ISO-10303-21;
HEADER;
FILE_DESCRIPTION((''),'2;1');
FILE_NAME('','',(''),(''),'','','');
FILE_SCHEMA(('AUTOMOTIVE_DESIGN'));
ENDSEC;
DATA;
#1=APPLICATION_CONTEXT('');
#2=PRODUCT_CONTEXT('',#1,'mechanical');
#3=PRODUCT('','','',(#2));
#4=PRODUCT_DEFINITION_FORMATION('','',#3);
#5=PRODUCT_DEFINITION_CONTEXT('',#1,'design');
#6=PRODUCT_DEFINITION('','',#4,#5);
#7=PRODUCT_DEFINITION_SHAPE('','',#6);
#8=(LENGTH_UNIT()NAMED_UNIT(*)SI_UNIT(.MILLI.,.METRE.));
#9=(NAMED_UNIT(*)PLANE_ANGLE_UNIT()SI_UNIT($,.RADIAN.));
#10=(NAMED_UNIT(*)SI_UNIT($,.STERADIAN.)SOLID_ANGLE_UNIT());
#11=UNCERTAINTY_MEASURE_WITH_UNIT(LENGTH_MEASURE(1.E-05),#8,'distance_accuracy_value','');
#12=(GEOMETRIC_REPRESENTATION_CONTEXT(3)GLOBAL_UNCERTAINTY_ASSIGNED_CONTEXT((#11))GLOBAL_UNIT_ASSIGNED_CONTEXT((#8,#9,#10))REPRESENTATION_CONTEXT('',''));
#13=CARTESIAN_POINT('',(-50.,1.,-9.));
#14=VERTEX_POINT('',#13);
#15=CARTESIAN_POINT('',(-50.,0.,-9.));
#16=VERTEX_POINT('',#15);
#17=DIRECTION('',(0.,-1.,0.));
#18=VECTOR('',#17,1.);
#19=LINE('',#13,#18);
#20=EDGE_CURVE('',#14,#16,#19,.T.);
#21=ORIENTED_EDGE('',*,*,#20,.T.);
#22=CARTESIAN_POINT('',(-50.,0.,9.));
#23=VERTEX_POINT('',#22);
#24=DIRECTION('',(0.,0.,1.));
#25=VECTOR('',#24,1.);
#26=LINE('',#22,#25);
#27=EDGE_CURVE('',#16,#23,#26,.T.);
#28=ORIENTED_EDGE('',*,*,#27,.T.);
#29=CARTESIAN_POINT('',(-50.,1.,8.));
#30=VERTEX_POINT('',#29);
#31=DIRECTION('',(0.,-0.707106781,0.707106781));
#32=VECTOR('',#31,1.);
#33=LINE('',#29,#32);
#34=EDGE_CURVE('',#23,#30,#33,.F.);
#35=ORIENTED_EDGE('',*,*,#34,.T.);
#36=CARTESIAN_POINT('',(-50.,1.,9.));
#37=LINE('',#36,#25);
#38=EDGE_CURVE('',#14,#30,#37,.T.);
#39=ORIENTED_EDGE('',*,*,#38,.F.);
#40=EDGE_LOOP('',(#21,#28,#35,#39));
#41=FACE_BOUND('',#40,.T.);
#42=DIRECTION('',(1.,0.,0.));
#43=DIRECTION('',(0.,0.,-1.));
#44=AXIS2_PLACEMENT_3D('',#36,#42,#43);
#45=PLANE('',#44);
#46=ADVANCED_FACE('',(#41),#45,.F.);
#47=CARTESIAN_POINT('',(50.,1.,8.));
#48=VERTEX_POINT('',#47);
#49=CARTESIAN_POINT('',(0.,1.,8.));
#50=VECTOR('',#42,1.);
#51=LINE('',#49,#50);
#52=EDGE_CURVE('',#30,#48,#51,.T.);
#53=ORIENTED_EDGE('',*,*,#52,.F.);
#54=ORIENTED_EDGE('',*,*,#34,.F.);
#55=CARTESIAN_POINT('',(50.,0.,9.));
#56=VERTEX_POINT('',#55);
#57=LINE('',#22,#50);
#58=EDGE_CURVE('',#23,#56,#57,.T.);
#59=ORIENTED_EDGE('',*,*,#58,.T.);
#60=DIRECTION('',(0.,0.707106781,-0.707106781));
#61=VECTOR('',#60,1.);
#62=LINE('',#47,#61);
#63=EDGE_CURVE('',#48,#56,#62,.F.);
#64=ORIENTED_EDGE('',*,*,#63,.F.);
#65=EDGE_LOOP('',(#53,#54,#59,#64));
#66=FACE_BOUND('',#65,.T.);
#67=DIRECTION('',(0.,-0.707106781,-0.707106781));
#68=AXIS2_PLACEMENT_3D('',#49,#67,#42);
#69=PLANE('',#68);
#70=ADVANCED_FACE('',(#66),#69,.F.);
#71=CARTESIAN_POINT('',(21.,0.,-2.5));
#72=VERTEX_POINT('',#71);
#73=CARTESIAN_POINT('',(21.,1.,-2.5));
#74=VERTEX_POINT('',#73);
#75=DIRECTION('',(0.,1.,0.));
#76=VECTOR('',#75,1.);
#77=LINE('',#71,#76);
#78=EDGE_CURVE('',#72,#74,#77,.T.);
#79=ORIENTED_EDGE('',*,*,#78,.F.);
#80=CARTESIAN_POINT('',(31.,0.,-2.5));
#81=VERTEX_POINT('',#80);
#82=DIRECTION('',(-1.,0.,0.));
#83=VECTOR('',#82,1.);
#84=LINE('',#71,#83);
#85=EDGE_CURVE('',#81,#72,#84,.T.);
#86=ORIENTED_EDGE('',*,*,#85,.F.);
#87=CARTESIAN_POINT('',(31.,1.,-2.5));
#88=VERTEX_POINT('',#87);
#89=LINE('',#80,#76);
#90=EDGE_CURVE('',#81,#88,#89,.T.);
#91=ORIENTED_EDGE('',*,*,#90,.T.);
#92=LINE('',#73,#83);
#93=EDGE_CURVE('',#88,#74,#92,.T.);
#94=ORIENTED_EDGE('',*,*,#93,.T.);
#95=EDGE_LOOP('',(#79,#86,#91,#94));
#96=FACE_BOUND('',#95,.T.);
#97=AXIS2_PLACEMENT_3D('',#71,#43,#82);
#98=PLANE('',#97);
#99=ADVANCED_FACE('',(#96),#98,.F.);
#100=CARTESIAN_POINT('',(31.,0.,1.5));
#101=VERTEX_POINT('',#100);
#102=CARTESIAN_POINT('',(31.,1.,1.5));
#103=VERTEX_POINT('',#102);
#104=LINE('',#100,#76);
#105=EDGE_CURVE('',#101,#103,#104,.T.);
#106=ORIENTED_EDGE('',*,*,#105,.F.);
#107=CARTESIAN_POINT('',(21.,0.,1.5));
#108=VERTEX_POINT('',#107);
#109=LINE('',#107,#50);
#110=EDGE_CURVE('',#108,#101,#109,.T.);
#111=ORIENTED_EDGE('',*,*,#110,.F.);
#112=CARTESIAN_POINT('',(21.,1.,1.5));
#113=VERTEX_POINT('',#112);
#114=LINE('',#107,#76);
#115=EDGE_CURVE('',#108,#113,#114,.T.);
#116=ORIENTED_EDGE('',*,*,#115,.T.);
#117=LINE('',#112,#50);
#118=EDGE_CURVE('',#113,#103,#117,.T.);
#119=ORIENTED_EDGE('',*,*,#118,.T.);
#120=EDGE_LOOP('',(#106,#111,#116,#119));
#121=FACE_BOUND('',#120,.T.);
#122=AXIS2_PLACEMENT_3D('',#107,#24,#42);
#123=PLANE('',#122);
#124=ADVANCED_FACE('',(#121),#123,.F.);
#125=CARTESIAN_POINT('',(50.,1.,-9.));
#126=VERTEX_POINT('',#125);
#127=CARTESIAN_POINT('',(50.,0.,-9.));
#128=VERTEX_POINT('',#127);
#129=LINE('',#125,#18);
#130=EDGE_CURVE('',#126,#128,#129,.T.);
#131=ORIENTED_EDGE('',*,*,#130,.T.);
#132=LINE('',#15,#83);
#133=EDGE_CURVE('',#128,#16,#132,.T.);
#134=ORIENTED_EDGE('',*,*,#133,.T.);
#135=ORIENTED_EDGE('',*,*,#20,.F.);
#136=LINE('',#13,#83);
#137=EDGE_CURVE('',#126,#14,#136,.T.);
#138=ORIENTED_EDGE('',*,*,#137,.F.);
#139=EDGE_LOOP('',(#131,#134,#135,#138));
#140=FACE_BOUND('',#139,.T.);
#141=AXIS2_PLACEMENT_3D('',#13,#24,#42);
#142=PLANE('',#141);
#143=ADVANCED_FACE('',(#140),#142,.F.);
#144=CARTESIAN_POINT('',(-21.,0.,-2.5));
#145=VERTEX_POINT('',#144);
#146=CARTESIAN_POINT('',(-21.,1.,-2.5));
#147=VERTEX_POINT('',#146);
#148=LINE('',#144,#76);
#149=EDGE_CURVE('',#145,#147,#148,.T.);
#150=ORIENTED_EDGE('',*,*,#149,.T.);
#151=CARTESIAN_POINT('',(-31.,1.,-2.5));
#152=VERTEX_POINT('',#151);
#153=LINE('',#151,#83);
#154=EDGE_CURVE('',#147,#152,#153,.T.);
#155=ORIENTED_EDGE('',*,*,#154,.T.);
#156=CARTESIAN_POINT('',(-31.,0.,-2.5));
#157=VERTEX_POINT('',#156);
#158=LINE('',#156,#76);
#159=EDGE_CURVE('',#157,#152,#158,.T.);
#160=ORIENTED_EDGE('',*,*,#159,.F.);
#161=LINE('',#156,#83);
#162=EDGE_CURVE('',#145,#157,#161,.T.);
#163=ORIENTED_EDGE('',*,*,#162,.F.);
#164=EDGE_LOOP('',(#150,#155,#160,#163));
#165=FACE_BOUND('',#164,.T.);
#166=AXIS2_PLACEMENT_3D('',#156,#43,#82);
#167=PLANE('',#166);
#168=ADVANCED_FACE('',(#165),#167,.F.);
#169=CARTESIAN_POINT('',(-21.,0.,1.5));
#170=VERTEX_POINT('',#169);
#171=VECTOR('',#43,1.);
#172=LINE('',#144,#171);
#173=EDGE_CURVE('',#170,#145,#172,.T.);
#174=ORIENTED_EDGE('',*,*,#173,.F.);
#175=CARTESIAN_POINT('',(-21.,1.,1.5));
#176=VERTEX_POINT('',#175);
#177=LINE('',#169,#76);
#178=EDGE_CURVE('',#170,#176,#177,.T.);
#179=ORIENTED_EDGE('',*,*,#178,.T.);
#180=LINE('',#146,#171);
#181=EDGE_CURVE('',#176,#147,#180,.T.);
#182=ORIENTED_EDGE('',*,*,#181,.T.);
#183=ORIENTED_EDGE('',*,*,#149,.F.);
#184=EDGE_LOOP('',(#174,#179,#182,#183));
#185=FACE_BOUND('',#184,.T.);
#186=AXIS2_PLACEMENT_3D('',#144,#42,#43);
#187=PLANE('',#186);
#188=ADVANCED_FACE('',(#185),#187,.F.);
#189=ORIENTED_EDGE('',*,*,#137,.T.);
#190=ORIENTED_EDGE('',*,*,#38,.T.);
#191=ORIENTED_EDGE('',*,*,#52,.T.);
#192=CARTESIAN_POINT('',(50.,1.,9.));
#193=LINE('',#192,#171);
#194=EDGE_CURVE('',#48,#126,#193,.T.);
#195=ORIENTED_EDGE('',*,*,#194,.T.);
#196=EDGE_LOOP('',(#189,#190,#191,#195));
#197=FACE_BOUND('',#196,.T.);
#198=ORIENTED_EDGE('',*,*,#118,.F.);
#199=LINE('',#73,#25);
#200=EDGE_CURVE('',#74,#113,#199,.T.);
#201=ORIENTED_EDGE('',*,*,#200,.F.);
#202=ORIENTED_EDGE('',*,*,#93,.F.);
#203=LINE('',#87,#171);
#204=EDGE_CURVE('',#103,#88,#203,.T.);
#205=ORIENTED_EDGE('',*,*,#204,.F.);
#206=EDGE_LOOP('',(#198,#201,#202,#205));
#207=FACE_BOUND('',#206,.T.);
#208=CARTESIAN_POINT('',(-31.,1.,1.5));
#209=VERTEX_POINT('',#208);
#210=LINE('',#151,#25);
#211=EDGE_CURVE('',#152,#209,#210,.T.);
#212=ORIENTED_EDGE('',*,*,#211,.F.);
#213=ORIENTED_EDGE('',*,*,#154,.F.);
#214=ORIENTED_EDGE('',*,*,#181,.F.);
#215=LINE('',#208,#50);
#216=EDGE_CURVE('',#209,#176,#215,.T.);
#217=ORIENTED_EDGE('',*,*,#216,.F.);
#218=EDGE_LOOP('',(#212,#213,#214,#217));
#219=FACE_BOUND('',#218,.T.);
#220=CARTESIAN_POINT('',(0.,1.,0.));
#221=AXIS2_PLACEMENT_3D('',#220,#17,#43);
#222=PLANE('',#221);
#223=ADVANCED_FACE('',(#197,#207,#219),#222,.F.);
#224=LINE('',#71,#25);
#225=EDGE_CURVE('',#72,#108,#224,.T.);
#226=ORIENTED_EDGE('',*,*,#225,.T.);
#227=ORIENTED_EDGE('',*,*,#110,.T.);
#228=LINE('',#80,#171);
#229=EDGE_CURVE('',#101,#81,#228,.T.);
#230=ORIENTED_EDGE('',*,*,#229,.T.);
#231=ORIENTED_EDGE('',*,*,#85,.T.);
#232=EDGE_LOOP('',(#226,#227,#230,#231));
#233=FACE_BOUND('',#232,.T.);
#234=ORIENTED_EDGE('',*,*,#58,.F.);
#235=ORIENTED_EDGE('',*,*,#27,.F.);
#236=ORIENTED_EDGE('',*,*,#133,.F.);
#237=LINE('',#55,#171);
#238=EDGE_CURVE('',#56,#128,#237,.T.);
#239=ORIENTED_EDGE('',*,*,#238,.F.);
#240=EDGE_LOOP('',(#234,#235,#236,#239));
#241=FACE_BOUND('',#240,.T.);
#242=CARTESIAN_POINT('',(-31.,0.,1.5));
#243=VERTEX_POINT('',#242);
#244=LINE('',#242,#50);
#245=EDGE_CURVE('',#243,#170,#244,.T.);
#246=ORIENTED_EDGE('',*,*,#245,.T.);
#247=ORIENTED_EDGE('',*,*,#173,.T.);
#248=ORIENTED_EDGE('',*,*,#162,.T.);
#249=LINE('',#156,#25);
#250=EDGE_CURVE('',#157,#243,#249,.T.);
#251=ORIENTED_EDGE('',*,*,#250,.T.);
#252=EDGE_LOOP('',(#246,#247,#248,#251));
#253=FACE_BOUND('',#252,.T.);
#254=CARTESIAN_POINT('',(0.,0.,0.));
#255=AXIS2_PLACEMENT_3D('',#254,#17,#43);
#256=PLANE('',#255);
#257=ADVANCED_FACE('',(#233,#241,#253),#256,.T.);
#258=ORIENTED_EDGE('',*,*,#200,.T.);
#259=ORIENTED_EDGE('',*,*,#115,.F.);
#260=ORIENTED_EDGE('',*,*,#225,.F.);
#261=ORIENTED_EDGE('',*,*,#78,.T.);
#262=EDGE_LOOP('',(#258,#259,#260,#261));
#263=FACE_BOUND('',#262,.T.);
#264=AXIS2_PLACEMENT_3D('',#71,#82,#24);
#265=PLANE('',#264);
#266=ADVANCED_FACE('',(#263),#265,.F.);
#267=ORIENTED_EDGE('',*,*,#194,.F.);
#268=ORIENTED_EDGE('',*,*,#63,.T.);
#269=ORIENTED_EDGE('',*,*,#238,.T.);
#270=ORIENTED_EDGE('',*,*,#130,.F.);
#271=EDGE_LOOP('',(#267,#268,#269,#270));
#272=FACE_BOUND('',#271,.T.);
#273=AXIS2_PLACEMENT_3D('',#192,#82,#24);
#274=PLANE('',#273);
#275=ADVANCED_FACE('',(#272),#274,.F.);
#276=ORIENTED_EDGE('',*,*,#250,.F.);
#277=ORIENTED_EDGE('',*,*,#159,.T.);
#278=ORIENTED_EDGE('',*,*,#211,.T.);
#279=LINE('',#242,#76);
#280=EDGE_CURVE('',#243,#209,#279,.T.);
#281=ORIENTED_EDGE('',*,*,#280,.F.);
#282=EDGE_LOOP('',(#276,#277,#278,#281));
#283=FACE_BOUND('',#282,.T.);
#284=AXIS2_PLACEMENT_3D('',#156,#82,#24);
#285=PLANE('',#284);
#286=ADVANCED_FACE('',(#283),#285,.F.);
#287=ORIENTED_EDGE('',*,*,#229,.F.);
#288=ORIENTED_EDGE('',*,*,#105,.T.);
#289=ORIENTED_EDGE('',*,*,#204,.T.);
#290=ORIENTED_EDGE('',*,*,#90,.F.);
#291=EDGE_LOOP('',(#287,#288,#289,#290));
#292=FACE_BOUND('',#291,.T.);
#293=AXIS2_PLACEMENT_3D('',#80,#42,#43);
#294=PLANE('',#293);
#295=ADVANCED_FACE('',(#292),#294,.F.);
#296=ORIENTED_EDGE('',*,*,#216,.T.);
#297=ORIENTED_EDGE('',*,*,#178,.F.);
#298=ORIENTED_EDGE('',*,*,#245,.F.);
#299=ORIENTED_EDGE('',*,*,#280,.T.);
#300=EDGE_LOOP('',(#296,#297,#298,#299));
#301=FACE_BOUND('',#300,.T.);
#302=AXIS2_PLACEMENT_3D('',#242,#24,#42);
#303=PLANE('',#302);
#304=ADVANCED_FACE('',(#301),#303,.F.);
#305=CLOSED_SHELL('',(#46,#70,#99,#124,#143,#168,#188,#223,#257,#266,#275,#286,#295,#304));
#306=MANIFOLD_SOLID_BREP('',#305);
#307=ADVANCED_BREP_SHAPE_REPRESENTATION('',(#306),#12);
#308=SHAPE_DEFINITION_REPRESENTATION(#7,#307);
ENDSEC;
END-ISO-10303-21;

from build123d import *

# Parameters (mm, degrees)
SKETCH_1_W          = 100
SKETCH_1_H          = 18
EXTRUDE_1_DEPTH     = 1
CHAMFER_1_SIZE      = 1
SKETCH_2_W          = 10
SKETCH_2_H          = 4
CUT_EXTRUDE_1_DEPTH = 1


with BuildPart() as part:
    # Эскиз1 → Бобышка-Вытянуть1 (new body)
    with BuildSketch(Plane(origin=(0, 0, 0), x_dir=(1, 0, 0), z_dir=(0, 1, 0))):
        Rectangle(SKETCH_1_W, SKETCH_1_H)
    extrude(amount=EXTRUDE_1_DEPTH)

    # Фаска1
    chamfer_1_edges = [part.edges().sort_by_distance(p)[0] for p in [
        (0, 1, 9),
    ]]
    chamfer(chamfer_1_edges, length=CHAMFER_1_SIZE - 0.0001)  # a hair under: the kernel refuses the full size

    # Эскиз2 → Вырез-Вытянуть1 (cut)
    with BuildSketch(Plane(origin=(0, 1, 0), x_dir=(1, 0, 0), z_dir=(0, 1, 0))):
        with Locations((-26, 0.5)):
            Rectangle(SKETCH_2_W, SKETCH_2_H)
        with Locations((26, 0.5)):
            Rectangle(SKETCH_2_W, SKETCH_2_H)
    extrude(amount=-CUT_EXTRUDE_1_DEPTH, mode=Mode.SUBTRACT)


solid = part.part
